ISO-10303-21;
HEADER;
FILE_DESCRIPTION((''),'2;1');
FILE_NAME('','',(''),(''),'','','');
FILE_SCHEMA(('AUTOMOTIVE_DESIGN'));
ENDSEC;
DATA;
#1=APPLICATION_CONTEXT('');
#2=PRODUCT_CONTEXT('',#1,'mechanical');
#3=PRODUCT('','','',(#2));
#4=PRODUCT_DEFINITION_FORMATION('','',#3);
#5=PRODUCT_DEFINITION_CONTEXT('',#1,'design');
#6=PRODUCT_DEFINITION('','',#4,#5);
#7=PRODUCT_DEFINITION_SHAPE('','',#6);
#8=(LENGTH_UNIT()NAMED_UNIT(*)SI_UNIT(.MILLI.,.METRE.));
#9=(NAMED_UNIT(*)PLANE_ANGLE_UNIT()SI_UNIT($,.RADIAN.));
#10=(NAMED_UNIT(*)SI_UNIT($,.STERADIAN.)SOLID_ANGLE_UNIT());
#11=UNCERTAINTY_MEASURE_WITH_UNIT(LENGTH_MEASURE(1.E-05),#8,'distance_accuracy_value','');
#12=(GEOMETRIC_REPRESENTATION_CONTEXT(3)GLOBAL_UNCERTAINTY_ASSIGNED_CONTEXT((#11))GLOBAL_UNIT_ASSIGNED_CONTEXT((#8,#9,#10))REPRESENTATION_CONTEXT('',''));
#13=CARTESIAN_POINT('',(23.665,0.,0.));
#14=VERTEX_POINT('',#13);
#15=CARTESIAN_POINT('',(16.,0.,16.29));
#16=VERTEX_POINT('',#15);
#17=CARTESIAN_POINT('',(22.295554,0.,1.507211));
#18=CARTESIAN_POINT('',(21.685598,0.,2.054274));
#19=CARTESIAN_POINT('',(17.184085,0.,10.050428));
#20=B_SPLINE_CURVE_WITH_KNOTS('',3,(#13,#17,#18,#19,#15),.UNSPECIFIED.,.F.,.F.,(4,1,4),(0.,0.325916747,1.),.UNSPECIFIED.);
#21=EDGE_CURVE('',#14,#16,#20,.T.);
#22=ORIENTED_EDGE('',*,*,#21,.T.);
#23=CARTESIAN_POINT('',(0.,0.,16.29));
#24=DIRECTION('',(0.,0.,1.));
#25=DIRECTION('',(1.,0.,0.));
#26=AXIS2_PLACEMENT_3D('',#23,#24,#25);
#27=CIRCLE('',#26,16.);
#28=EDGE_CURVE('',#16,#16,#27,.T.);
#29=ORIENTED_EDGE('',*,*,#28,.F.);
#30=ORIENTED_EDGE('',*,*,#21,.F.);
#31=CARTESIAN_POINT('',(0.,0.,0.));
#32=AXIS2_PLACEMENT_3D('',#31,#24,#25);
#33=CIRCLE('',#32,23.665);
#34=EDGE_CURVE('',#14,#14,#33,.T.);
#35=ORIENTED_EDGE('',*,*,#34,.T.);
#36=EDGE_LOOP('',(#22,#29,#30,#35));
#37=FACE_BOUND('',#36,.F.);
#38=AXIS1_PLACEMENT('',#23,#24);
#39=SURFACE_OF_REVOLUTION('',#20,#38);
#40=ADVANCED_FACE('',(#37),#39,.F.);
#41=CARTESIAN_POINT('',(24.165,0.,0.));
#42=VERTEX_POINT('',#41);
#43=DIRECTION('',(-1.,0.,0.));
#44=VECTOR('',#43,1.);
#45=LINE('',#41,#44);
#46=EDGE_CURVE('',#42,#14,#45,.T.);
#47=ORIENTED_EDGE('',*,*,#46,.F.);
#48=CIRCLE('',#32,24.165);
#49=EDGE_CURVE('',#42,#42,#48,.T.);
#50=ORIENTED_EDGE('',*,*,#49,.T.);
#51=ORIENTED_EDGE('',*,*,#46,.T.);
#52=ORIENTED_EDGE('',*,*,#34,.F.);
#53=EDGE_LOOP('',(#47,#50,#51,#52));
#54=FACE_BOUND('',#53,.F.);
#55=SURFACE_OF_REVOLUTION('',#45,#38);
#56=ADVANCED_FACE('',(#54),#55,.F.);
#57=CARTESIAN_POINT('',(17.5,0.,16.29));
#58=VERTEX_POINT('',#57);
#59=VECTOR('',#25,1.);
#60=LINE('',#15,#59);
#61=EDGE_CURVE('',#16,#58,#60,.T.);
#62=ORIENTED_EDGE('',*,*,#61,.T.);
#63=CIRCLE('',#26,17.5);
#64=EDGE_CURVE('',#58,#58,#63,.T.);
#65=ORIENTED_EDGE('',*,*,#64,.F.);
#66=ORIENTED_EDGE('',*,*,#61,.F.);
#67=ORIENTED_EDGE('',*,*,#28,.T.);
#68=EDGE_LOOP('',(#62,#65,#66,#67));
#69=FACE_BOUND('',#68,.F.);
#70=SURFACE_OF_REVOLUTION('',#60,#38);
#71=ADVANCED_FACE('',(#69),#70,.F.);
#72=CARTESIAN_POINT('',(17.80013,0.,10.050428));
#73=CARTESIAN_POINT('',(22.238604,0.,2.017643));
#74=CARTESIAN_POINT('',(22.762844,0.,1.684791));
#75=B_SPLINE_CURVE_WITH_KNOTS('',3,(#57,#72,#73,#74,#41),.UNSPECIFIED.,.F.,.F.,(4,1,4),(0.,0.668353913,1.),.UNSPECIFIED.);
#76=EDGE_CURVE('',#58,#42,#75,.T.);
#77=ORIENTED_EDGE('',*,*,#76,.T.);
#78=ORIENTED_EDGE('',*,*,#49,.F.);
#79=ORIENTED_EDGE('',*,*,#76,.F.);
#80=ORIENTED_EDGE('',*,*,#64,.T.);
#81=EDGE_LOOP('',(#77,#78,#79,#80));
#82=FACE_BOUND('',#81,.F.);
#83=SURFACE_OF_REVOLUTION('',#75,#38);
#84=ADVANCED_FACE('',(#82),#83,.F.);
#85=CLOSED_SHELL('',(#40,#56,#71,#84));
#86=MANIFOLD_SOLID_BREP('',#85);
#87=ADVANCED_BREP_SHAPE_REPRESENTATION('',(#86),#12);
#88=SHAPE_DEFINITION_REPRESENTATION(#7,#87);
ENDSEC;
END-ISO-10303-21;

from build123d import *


with BuildPart() as f4:
    # F4: sweep along a path in F2
    with BuildLine(Plane.XY.offset(16.29)) as f4_path:
        CenterArc((0, 0), 17.5, 0, 360)
    # F3 (on Front) → F4 (sweep)
    with BuildSketch(Plane.XZ):
        with BuildLine():
            add(Edge.make_bspline(
                [(-24.165, 0), (-22.7628440457, 1.6847910613), (-22.2386035811, 2.0176427038), (-17.800130412, 10.0504284315), (-17.5, 16.29)],
                knots=[0, 0, 0, 0, 0.3316460871, 1, 1, 1, 1], degree=3))
            Line((-24.165, 0), (-23.665, 0))
            add(Edge.make_bspline(
                [(-23.665, 0), (-22.2955542786, 1.5072109543), (-21.6855979109, 2.0542739255), (-17.1840847583, 10.0504284315), (-16, 16.29)],
                knots=[0, 0, 0, 0, 0.325916747, 1, 1, 1, 1], degree=3))
            Line((-16, 16.29), (-17.5, 16.29))
        make_face()
    sweep(path=f4_path.line)


solid = f4.part
